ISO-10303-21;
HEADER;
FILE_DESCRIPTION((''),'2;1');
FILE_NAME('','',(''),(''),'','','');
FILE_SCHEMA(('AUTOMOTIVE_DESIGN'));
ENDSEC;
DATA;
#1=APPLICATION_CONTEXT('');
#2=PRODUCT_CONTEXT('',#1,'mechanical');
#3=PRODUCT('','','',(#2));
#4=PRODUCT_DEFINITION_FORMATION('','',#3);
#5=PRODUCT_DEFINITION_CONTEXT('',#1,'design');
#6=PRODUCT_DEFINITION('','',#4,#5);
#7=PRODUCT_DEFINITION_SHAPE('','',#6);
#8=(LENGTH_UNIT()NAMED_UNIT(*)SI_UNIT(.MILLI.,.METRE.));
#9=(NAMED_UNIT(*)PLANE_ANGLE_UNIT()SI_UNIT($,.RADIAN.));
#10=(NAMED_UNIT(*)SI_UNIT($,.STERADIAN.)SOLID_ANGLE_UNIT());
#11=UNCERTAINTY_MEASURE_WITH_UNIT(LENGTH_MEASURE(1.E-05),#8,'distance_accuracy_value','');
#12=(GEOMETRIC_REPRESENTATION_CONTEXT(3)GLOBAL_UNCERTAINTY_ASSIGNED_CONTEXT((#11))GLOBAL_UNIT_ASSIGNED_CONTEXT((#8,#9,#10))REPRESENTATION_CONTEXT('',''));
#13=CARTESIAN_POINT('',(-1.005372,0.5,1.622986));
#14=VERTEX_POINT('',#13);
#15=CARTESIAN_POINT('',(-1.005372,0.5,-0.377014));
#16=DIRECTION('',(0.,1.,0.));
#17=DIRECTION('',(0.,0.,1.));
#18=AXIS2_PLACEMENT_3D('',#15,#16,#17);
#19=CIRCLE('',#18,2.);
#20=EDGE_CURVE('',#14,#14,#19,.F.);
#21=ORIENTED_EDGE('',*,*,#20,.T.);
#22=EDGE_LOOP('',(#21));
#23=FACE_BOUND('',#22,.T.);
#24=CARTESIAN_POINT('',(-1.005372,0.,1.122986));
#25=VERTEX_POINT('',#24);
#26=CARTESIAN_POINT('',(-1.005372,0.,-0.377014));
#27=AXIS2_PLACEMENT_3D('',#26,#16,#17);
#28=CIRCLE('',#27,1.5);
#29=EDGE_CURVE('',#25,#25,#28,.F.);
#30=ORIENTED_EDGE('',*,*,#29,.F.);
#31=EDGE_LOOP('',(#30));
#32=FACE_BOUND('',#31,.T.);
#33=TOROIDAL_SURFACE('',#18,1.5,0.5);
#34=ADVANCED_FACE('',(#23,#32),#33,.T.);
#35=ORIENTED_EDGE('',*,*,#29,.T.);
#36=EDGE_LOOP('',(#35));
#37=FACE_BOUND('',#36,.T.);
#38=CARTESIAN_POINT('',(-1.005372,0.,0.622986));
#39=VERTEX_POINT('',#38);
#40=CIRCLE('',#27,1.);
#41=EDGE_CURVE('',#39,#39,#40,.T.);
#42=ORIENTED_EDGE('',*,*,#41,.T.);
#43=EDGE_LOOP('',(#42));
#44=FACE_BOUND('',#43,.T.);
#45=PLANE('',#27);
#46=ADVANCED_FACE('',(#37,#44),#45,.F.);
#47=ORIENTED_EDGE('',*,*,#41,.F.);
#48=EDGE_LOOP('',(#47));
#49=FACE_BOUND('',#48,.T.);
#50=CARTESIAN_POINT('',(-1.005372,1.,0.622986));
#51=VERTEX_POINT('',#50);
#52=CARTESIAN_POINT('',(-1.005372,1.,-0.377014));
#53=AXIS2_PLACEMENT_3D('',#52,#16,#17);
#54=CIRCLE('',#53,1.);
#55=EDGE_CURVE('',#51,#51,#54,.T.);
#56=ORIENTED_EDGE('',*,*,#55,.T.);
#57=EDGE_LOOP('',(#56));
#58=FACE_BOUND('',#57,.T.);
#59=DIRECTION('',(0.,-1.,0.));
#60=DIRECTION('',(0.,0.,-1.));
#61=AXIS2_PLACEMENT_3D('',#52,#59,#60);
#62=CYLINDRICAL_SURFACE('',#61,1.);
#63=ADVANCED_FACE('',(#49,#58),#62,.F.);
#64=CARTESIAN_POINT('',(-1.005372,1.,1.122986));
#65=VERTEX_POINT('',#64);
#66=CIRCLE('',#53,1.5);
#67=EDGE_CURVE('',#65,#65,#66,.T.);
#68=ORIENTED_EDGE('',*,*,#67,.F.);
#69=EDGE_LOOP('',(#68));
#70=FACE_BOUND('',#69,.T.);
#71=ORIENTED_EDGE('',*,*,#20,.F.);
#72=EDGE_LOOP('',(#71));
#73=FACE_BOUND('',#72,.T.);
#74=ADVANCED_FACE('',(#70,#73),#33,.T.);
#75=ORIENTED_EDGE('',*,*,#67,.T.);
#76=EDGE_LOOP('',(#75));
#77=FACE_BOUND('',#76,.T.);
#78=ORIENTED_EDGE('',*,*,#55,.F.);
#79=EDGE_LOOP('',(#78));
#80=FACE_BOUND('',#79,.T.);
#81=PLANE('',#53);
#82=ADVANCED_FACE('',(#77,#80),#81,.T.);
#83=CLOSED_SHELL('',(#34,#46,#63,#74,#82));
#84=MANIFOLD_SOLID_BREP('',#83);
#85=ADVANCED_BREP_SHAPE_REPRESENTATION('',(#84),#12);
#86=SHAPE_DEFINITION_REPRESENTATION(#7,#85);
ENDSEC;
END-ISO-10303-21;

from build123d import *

# Parameters (mm, degrees)
SKETCH1_R           = 2
SKETCH1_R_2         = 1
BOSS_EXTRUDE1_DEPTH = 1
FILLET1_R           = 0.5


with BuildPart() as part:
    # Sketch1 → Boss-Extrude1 (new body)
    with BuildSketch(Plane(origin=(0, 0, 0), x_dir=(1, 0, 0), z_dir=(0, 1, 0))):
        with Locations(Location((-1.005371626, 0.37701436, 0), (0, 0, 270))):
            Circle(SKETCH1_R)
        with Locations(Location((-1.005371626, 0.37701436, 0), (0, 0, 270))):
            Circle(SKETCH1_R_2, mode=Mode.SUBTRACT)
    extrude(amount=BOSS_EXTRUDE1_DEPTH)

    # Fillet1
    fillet1_edges = [part.edges().sort_by_distance(p)[0] for p in [
        (-1.005371626, 0, -2.37701436),
        (-1.005371626, 1, -2.37701436),
    ]]
    fillet(fillet1_edges, radius=FILLET1_R - 0.0001)  # a hair under: the kernel refuses the full size


solid = part.part
